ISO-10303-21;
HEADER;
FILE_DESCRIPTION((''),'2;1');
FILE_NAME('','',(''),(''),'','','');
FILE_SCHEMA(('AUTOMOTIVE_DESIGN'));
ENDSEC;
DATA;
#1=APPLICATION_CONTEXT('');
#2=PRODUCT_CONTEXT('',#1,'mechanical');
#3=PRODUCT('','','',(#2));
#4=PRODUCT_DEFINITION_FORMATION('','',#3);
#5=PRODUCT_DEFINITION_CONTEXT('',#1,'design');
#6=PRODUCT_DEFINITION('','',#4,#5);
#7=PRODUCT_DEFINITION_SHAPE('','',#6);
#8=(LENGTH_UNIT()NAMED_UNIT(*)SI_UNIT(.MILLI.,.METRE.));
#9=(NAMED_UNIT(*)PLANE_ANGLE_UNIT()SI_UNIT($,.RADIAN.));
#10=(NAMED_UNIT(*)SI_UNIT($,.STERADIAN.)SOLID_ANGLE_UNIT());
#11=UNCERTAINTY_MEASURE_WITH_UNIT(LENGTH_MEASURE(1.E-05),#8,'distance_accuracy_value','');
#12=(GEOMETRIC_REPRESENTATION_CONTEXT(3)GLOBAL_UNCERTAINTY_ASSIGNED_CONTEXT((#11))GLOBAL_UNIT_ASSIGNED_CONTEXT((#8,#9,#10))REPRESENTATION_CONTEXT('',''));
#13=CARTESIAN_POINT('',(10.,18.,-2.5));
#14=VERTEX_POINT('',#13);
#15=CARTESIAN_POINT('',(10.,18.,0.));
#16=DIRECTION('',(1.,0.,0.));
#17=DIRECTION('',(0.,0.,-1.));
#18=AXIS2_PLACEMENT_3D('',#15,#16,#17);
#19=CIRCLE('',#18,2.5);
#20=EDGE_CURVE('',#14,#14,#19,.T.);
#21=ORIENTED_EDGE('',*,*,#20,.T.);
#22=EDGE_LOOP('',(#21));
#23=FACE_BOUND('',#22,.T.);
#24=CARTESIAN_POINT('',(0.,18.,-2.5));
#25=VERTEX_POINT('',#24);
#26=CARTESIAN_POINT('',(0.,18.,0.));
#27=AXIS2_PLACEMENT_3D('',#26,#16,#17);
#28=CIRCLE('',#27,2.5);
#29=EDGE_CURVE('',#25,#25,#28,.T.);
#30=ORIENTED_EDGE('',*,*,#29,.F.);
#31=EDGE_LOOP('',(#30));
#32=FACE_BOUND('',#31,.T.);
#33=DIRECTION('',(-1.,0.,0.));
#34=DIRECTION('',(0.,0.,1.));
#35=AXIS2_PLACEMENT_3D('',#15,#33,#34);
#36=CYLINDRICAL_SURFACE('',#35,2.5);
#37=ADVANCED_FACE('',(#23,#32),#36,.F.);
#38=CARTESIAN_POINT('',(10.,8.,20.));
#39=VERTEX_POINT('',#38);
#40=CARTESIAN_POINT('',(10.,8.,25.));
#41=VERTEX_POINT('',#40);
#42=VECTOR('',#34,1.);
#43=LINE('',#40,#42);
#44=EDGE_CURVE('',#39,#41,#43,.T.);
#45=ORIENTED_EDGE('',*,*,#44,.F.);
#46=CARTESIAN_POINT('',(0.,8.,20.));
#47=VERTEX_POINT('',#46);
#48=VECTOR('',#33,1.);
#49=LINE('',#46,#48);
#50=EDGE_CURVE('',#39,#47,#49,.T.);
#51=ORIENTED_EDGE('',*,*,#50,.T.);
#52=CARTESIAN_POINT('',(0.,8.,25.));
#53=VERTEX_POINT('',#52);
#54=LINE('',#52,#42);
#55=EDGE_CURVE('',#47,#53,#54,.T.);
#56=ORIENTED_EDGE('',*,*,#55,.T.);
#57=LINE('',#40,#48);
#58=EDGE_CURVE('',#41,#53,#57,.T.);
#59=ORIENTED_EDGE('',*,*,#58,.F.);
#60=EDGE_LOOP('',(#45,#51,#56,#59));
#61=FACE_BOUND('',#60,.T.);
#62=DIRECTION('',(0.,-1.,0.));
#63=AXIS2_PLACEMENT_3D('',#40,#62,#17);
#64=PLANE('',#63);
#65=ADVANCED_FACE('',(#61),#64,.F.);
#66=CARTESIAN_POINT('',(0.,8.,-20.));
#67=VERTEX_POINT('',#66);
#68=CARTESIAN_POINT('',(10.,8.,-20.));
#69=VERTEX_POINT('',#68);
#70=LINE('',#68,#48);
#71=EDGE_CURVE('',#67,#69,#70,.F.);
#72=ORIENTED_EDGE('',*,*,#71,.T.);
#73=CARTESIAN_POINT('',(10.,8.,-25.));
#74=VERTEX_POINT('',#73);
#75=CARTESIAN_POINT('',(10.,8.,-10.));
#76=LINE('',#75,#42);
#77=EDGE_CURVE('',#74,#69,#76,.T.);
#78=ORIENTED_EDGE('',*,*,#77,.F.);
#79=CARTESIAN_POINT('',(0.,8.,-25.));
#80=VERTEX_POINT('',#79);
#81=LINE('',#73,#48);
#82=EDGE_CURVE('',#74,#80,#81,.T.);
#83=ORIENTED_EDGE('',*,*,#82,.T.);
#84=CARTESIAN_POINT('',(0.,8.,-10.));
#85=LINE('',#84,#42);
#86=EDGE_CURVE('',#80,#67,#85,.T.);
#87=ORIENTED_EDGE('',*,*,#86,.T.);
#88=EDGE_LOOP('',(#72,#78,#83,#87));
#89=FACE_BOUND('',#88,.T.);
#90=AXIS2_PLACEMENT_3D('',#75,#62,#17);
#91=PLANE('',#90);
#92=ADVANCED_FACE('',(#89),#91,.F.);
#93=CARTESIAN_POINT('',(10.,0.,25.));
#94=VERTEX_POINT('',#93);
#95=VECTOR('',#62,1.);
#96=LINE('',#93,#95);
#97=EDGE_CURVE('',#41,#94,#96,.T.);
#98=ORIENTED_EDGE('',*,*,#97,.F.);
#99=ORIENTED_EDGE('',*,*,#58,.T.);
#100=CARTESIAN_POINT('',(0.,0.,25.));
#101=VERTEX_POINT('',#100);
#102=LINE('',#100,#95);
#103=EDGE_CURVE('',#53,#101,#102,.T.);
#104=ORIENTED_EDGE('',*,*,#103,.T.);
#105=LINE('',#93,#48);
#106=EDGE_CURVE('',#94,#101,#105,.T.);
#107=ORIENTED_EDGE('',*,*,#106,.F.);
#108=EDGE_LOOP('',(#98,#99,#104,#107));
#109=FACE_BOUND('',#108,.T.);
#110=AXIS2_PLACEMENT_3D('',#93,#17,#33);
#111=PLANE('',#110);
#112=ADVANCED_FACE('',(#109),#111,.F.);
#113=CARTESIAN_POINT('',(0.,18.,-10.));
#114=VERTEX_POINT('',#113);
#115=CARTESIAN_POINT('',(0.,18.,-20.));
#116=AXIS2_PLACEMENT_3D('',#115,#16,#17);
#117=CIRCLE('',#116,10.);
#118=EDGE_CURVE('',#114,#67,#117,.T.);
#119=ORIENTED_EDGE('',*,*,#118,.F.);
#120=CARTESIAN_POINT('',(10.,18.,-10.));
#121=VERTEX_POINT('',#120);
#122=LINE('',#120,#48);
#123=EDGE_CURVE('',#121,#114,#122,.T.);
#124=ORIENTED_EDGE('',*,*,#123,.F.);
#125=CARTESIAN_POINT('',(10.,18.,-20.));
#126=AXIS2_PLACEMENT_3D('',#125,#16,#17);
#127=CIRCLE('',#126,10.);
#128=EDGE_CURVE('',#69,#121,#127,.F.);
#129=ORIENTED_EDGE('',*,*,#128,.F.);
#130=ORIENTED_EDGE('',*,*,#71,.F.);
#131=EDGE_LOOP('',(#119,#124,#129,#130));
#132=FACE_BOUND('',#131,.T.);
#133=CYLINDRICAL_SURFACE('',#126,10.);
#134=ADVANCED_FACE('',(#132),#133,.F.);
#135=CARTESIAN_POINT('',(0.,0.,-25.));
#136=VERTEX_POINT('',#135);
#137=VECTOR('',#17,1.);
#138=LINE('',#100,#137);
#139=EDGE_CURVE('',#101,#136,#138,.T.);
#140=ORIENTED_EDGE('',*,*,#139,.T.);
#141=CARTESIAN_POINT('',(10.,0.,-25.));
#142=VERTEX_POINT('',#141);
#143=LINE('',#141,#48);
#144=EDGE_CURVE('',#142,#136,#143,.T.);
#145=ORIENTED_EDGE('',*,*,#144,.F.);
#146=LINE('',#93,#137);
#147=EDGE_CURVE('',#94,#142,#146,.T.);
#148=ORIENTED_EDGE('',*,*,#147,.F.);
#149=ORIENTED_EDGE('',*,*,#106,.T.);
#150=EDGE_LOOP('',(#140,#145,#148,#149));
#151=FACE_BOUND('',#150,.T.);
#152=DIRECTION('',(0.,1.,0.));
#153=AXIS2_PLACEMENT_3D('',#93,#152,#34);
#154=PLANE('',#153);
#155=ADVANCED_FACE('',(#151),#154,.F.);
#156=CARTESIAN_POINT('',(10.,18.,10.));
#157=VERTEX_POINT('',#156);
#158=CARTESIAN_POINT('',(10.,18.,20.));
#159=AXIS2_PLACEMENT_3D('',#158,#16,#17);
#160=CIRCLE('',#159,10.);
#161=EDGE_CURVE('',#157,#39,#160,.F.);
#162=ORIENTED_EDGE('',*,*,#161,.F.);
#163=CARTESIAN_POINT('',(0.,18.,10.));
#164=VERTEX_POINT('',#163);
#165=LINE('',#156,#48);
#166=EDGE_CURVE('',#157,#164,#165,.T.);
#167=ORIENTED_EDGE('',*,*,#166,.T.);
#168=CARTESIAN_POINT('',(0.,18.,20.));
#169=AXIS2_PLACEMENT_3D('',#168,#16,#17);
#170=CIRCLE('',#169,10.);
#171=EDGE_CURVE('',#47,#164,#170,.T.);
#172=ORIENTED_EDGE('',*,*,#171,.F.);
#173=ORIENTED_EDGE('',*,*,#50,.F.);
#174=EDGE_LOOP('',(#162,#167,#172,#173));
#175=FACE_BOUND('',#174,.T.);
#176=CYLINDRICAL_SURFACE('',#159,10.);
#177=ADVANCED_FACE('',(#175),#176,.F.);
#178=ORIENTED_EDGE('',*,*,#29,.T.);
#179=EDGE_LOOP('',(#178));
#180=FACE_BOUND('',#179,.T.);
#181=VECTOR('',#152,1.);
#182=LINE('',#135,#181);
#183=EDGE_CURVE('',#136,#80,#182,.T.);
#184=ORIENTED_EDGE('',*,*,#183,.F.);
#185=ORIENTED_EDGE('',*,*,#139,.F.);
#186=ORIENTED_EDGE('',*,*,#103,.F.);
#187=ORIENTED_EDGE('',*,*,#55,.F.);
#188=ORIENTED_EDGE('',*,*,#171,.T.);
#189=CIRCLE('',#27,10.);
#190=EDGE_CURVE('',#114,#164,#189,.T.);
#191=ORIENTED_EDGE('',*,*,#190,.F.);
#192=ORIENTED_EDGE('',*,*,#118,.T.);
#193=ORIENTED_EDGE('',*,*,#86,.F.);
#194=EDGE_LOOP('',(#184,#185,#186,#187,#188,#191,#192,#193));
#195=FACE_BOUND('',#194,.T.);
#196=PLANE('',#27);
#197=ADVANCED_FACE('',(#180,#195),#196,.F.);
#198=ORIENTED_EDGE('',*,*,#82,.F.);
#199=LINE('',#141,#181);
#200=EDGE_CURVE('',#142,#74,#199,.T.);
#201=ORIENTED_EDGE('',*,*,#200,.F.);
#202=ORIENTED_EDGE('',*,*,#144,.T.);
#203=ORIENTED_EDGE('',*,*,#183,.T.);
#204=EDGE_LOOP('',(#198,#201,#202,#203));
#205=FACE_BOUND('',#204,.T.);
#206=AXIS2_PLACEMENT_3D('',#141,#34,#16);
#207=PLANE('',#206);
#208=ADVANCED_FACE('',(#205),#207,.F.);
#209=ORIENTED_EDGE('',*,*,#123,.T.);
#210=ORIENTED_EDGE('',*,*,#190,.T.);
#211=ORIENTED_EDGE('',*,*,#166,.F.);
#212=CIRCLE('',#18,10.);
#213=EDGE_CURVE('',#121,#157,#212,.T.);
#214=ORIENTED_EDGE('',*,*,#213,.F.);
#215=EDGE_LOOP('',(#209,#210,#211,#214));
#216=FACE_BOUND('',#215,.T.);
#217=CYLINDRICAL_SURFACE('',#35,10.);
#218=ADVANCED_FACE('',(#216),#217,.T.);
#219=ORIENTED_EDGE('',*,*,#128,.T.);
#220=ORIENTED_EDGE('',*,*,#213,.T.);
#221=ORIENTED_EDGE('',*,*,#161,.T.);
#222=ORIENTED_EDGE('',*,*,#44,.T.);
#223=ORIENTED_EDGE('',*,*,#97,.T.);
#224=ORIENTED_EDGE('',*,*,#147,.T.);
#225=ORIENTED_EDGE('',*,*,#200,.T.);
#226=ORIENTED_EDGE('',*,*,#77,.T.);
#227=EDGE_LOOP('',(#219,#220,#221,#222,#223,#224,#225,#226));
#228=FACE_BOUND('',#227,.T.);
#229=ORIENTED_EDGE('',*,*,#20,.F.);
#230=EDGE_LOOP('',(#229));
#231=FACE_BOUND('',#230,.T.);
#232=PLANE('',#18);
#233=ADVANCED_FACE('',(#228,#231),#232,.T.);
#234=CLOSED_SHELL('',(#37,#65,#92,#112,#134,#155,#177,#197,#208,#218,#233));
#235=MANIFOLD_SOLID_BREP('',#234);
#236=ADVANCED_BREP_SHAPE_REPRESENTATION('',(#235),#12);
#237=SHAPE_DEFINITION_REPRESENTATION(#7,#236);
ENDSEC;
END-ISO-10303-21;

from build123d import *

# Parameters (mm, degrees)
SKETCH_1_R      = 2.5
EXTRUDE_1_DEPTH = 10
FILLET_1_R      = 10


with BuildPart() as part:
    # 草圖1 → 填料-伸長1 (new body)
    with BuildSketch(Plane(origin=(0, 0, 0), x_dir=(0, 0, -1), z_dir=(1, 0, 0))):
        with BuildLine():
            Line((-25, 0), (25, 0))
            Line((25, 0), (25, 8))
            Line((25, 8), (10, 8))
            Line((10, 8), (10, 18))
            ThreePointArc((10, 18), (0, 28), (-10, 18))
            Line((-10, 18), (-10, 8))
            Line((-10, 8), (-25, 8))
            Line((-25, 8), (-25, 0))
        make_face()
        with Locations((0, 18)):
            Circle(SKETCH_1_R, mode=Mode.SUBTRACT)
    extrude(amount=EXTRUDE_1_DEPTH)

    # 圓角1
    fillet_1_edges = [part.edges().sort_by_distance(p)[0] for p in [
        (5, 8, -10),
        (5, 8, 10),
    ]]
    fillet(fillet_1_edges, radius=FILLET_1_R - 0.0001)  # a hair under: the kernel refuses the full size


solid = part.part
